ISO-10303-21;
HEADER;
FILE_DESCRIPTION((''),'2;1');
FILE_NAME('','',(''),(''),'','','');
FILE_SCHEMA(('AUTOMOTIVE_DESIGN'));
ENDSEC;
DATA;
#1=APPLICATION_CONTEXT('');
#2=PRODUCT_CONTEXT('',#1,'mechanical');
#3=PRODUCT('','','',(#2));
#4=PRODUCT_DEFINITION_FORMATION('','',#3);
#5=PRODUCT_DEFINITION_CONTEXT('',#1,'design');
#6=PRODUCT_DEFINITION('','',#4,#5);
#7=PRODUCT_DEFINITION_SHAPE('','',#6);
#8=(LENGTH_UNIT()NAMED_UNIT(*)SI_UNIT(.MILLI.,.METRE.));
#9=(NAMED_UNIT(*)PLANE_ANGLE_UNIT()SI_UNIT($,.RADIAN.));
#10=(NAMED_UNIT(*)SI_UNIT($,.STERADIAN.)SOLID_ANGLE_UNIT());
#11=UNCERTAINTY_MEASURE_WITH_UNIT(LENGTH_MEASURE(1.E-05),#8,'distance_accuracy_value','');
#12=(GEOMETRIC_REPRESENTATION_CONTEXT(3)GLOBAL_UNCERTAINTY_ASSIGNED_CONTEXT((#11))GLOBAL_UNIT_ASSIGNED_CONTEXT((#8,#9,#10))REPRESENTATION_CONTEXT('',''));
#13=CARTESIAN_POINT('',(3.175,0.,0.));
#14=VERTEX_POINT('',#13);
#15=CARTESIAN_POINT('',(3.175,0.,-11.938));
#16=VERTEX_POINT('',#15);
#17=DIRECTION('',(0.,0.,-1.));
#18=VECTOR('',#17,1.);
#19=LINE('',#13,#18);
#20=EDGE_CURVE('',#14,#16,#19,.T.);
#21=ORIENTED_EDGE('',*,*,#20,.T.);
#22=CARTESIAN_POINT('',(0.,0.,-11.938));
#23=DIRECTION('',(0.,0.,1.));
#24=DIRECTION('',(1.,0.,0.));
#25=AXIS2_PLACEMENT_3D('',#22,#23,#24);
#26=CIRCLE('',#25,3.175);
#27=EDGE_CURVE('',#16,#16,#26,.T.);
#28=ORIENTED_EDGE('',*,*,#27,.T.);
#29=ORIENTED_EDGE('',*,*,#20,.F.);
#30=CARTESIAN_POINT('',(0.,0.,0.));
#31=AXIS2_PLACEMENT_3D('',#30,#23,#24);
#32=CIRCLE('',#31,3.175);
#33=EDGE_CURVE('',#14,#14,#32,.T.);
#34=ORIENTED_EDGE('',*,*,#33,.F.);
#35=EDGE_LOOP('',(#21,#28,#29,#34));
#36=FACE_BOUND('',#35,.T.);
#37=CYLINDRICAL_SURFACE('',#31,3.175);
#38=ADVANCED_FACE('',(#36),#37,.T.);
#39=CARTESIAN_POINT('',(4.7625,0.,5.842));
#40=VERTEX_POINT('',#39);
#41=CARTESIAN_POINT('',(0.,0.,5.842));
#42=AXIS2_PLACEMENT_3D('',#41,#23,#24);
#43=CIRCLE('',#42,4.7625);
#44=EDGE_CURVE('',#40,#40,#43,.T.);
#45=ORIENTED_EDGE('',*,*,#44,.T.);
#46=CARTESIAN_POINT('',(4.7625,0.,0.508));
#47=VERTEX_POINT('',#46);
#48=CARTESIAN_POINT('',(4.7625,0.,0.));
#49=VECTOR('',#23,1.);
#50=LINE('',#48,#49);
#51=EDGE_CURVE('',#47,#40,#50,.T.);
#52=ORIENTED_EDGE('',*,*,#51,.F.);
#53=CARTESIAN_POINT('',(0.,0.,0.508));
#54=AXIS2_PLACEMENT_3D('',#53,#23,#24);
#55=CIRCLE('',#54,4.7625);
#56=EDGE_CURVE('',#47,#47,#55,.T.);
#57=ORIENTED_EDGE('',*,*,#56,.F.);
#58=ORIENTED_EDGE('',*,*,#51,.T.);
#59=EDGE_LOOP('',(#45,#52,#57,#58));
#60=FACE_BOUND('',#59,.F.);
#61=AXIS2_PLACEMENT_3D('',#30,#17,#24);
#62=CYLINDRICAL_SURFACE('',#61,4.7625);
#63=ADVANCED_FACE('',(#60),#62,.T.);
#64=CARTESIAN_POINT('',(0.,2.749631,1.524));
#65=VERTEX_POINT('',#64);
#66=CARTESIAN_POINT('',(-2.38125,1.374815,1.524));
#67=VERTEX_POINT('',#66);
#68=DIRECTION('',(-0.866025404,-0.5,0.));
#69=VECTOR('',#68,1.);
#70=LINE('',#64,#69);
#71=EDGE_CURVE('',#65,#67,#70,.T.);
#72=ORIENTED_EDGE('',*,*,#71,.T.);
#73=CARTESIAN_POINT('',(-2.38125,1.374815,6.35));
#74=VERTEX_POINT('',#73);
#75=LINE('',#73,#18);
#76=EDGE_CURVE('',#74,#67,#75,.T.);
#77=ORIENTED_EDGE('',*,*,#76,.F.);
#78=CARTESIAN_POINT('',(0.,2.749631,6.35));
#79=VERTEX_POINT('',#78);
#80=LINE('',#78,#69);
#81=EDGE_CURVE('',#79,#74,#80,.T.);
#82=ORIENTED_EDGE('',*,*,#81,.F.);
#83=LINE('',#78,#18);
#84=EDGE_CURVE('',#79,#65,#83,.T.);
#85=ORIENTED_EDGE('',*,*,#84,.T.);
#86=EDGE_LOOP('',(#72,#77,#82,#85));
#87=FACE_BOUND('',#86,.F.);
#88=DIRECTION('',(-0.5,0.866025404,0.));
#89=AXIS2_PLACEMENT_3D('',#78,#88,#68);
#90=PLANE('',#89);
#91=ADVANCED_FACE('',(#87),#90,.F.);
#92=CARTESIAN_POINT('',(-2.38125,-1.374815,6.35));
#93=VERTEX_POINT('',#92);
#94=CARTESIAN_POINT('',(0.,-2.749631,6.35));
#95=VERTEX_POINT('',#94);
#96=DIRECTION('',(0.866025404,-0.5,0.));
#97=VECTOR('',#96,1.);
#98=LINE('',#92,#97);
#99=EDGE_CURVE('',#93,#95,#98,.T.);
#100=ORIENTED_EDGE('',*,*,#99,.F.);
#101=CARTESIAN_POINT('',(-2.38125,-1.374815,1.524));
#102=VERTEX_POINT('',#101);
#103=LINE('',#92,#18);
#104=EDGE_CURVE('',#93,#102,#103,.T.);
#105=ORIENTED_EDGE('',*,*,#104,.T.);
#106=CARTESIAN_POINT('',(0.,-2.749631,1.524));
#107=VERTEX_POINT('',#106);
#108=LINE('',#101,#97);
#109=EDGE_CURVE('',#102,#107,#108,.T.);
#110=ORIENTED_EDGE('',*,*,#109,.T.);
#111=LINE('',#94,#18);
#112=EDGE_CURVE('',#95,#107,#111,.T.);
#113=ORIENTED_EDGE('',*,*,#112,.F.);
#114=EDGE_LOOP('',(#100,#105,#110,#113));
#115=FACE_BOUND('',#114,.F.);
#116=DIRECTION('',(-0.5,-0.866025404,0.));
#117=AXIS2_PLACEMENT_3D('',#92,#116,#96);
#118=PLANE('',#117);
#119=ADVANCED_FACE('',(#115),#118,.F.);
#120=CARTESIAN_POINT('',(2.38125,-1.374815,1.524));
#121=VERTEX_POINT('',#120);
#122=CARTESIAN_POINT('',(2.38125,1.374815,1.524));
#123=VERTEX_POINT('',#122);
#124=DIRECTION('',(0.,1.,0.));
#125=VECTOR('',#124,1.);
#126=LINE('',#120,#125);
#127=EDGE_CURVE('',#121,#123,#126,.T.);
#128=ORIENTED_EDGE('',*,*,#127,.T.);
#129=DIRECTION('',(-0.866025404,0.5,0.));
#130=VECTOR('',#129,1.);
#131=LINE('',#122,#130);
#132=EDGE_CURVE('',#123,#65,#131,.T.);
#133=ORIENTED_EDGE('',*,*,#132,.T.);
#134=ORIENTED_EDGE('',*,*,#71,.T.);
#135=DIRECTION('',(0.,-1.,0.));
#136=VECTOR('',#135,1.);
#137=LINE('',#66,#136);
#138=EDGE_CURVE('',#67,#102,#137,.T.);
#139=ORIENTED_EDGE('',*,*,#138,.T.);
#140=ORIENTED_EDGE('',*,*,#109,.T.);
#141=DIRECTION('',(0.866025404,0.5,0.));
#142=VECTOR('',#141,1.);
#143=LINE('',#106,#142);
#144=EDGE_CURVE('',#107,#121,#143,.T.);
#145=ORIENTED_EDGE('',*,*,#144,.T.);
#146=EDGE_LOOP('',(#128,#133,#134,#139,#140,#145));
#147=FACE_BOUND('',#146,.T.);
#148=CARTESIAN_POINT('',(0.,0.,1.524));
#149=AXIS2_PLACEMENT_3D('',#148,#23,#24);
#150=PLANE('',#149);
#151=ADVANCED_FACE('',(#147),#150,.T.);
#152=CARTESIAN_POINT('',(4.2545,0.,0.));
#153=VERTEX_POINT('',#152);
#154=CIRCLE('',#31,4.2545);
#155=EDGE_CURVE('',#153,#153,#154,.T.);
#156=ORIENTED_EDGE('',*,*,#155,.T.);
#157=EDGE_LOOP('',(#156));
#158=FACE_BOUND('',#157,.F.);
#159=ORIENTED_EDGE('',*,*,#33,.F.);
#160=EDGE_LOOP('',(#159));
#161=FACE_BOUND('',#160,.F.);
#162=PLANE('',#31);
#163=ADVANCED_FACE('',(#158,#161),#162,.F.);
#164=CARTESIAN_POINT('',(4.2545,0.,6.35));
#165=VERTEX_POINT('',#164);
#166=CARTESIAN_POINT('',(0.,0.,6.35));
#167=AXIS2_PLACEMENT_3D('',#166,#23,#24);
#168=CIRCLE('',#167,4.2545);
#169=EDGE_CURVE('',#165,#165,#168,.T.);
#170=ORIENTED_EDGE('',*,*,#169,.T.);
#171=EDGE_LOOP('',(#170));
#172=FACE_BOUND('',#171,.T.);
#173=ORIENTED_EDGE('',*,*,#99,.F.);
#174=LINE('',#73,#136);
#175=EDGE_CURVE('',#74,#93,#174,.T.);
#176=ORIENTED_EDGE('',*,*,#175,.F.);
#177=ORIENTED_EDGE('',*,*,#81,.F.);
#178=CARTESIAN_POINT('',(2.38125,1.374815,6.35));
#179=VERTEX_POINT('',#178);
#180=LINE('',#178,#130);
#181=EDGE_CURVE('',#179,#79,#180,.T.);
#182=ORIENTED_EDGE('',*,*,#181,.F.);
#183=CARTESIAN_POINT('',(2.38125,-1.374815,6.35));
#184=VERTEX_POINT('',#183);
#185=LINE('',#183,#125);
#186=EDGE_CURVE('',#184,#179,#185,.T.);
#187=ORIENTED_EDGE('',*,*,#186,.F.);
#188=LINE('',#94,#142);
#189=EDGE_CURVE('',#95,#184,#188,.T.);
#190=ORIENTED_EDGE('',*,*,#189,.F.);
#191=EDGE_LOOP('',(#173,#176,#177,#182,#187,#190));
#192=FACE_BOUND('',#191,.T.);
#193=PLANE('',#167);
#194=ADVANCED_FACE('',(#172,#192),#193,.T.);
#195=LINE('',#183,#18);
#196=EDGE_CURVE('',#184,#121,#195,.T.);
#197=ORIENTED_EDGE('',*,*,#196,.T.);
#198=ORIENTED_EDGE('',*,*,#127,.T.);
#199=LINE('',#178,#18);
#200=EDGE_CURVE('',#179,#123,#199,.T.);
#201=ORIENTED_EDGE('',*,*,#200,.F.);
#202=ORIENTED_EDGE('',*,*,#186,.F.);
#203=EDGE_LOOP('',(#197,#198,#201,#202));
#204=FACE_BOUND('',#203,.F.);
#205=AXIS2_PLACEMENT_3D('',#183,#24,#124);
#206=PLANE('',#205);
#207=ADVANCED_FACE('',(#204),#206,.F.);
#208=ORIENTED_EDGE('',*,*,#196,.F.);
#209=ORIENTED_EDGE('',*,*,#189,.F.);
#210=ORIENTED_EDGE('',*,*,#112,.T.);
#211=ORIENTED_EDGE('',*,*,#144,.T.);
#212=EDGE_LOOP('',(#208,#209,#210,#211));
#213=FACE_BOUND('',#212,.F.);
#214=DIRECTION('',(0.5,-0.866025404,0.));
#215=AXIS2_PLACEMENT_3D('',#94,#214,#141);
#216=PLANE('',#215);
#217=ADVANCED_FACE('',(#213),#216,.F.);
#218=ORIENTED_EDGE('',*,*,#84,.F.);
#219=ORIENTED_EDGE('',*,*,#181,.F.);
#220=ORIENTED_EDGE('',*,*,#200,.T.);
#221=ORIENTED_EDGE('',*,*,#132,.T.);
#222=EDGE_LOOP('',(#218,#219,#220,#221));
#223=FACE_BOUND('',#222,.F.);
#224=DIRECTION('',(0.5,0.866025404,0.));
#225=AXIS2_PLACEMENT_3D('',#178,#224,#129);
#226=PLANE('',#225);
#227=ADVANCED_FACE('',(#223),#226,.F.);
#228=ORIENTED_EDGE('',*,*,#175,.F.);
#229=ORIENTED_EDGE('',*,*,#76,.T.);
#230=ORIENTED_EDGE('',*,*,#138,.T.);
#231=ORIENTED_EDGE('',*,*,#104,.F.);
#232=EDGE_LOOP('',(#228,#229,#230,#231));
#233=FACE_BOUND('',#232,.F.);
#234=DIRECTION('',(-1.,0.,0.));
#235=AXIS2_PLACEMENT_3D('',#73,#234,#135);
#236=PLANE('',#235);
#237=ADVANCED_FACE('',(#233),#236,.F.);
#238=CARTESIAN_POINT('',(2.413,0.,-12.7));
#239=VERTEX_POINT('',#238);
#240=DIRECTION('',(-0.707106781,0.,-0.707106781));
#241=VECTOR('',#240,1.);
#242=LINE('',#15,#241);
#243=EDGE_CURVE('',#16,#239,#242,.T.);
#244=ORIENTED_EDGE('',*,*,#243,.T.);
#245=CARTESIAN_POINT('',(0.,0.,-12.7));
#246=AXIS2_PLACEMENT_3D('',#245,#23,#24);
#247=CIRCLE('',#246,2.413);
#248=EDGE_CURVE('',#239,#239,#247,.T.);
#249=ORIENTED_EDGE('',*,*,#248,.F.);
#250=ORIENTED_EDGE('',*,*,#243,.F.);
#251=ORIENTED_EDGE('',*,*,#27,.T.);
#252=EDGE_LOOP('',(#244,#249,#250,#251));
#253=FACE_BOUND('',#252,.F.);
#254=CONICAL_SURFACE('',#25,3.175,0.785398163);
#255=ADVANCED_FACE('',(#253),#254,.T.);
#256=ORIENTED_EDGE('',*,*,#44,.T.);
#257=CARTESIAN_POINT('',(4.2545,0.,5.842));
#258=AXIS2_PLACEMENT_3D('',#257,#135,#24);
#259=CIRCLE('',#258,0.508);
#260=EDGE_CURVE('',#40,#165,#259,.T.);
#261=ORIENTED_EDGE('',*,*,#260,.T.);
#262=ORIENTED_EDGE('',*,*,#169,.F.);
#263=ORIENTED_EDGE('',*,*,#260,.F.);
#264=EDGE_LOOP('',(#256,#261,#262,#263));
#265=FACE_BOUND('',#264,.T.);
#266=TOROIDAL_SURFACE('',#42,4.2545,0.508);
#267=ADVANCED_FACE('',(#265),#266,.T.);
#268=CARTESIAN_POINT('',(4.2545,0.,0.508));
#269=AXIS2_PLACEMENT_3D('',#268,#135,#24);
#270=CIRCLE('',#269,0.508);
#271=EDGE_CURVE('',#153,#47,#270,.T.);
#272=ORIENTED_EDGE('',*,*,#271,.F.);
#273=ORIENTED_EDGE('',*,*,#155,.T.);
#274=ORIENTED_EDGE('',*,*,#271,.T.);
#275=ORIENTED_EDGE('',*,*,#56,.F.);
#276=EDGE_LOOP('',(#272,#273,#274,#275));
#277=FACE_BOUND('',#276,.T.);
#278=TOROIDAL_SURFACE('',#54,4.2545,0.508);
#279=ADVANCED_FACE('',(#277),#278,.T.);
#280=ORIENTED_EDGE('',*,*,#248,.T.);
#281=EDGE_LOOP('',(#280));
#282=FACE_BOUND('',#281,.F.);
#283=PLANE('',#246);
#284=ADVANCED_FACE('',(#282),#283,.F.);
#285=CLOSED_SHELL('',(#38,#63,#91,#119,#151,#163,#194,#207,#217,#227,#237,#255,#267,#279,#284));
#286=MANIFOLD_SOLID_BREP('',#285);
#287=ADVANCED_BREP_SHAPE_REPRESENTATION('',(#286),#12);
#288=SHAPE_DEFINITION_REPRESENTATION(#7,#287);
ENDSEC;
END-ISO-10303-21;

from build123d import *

# Parameters (mm, degrees)
F1_R     = 4.7625
F4_DEPTH = 6.35
F6_DEPTH = 4.826
F2_R     = 3.175
F7_DEPTH = 12.7
F9_SIZE2 = 0.762
F9_SIZE  = 0.762
F10_R    = 0.508


# Not quite as in the source:
# - the program builds the solid bodies; features that only make, move or delete a surface that nothing else refers to are left out


with BuildPart() as f4:
    # F1 (on Top) → F4 (new body)
    with BuildSketch(Plane.XY):
        Circle(F1_R)
    extrude(amount=F4_DEPTH)

    # F5 (on face) → F6 (cut)
    with BuildSketch(Plane.XY.offset(6.35)):
        Polygon((2.38125, -1.3748153285), (2.38125, 1.3748153285), (0, 2.749630657), (-2.38125, 1.3748153285), (-2.38125, -1.3748153285), (0, -2.749630657), align=None)
    extrude(amount=-F6_DEPTH, mode=Mode.SUBTRACT)

    # F2 (on Top) → F7 (join)
    with BuildSketch(Plane.XY):
        Circle(F2_R)
    extrude(amount=-F7_DEPTH)

    # F9
    f9_edges = [f4.edges().sort_by_distance(p)[0] for p in [
        (-3.175, 0, -12.7),
    ]]
    chamfer(f9_edges, length=F9_SIZE, length2=F9_SIZE2)

    # F10
    f10_edges = [f4.edges().sort_by_distance(p)[0] for p in [
        (-4.7625, 0, 6.35),
        (-4.7625, 0, 0),
    ]]
    fillet(f10_edges, radius=F10_R)


solid = f4.part
